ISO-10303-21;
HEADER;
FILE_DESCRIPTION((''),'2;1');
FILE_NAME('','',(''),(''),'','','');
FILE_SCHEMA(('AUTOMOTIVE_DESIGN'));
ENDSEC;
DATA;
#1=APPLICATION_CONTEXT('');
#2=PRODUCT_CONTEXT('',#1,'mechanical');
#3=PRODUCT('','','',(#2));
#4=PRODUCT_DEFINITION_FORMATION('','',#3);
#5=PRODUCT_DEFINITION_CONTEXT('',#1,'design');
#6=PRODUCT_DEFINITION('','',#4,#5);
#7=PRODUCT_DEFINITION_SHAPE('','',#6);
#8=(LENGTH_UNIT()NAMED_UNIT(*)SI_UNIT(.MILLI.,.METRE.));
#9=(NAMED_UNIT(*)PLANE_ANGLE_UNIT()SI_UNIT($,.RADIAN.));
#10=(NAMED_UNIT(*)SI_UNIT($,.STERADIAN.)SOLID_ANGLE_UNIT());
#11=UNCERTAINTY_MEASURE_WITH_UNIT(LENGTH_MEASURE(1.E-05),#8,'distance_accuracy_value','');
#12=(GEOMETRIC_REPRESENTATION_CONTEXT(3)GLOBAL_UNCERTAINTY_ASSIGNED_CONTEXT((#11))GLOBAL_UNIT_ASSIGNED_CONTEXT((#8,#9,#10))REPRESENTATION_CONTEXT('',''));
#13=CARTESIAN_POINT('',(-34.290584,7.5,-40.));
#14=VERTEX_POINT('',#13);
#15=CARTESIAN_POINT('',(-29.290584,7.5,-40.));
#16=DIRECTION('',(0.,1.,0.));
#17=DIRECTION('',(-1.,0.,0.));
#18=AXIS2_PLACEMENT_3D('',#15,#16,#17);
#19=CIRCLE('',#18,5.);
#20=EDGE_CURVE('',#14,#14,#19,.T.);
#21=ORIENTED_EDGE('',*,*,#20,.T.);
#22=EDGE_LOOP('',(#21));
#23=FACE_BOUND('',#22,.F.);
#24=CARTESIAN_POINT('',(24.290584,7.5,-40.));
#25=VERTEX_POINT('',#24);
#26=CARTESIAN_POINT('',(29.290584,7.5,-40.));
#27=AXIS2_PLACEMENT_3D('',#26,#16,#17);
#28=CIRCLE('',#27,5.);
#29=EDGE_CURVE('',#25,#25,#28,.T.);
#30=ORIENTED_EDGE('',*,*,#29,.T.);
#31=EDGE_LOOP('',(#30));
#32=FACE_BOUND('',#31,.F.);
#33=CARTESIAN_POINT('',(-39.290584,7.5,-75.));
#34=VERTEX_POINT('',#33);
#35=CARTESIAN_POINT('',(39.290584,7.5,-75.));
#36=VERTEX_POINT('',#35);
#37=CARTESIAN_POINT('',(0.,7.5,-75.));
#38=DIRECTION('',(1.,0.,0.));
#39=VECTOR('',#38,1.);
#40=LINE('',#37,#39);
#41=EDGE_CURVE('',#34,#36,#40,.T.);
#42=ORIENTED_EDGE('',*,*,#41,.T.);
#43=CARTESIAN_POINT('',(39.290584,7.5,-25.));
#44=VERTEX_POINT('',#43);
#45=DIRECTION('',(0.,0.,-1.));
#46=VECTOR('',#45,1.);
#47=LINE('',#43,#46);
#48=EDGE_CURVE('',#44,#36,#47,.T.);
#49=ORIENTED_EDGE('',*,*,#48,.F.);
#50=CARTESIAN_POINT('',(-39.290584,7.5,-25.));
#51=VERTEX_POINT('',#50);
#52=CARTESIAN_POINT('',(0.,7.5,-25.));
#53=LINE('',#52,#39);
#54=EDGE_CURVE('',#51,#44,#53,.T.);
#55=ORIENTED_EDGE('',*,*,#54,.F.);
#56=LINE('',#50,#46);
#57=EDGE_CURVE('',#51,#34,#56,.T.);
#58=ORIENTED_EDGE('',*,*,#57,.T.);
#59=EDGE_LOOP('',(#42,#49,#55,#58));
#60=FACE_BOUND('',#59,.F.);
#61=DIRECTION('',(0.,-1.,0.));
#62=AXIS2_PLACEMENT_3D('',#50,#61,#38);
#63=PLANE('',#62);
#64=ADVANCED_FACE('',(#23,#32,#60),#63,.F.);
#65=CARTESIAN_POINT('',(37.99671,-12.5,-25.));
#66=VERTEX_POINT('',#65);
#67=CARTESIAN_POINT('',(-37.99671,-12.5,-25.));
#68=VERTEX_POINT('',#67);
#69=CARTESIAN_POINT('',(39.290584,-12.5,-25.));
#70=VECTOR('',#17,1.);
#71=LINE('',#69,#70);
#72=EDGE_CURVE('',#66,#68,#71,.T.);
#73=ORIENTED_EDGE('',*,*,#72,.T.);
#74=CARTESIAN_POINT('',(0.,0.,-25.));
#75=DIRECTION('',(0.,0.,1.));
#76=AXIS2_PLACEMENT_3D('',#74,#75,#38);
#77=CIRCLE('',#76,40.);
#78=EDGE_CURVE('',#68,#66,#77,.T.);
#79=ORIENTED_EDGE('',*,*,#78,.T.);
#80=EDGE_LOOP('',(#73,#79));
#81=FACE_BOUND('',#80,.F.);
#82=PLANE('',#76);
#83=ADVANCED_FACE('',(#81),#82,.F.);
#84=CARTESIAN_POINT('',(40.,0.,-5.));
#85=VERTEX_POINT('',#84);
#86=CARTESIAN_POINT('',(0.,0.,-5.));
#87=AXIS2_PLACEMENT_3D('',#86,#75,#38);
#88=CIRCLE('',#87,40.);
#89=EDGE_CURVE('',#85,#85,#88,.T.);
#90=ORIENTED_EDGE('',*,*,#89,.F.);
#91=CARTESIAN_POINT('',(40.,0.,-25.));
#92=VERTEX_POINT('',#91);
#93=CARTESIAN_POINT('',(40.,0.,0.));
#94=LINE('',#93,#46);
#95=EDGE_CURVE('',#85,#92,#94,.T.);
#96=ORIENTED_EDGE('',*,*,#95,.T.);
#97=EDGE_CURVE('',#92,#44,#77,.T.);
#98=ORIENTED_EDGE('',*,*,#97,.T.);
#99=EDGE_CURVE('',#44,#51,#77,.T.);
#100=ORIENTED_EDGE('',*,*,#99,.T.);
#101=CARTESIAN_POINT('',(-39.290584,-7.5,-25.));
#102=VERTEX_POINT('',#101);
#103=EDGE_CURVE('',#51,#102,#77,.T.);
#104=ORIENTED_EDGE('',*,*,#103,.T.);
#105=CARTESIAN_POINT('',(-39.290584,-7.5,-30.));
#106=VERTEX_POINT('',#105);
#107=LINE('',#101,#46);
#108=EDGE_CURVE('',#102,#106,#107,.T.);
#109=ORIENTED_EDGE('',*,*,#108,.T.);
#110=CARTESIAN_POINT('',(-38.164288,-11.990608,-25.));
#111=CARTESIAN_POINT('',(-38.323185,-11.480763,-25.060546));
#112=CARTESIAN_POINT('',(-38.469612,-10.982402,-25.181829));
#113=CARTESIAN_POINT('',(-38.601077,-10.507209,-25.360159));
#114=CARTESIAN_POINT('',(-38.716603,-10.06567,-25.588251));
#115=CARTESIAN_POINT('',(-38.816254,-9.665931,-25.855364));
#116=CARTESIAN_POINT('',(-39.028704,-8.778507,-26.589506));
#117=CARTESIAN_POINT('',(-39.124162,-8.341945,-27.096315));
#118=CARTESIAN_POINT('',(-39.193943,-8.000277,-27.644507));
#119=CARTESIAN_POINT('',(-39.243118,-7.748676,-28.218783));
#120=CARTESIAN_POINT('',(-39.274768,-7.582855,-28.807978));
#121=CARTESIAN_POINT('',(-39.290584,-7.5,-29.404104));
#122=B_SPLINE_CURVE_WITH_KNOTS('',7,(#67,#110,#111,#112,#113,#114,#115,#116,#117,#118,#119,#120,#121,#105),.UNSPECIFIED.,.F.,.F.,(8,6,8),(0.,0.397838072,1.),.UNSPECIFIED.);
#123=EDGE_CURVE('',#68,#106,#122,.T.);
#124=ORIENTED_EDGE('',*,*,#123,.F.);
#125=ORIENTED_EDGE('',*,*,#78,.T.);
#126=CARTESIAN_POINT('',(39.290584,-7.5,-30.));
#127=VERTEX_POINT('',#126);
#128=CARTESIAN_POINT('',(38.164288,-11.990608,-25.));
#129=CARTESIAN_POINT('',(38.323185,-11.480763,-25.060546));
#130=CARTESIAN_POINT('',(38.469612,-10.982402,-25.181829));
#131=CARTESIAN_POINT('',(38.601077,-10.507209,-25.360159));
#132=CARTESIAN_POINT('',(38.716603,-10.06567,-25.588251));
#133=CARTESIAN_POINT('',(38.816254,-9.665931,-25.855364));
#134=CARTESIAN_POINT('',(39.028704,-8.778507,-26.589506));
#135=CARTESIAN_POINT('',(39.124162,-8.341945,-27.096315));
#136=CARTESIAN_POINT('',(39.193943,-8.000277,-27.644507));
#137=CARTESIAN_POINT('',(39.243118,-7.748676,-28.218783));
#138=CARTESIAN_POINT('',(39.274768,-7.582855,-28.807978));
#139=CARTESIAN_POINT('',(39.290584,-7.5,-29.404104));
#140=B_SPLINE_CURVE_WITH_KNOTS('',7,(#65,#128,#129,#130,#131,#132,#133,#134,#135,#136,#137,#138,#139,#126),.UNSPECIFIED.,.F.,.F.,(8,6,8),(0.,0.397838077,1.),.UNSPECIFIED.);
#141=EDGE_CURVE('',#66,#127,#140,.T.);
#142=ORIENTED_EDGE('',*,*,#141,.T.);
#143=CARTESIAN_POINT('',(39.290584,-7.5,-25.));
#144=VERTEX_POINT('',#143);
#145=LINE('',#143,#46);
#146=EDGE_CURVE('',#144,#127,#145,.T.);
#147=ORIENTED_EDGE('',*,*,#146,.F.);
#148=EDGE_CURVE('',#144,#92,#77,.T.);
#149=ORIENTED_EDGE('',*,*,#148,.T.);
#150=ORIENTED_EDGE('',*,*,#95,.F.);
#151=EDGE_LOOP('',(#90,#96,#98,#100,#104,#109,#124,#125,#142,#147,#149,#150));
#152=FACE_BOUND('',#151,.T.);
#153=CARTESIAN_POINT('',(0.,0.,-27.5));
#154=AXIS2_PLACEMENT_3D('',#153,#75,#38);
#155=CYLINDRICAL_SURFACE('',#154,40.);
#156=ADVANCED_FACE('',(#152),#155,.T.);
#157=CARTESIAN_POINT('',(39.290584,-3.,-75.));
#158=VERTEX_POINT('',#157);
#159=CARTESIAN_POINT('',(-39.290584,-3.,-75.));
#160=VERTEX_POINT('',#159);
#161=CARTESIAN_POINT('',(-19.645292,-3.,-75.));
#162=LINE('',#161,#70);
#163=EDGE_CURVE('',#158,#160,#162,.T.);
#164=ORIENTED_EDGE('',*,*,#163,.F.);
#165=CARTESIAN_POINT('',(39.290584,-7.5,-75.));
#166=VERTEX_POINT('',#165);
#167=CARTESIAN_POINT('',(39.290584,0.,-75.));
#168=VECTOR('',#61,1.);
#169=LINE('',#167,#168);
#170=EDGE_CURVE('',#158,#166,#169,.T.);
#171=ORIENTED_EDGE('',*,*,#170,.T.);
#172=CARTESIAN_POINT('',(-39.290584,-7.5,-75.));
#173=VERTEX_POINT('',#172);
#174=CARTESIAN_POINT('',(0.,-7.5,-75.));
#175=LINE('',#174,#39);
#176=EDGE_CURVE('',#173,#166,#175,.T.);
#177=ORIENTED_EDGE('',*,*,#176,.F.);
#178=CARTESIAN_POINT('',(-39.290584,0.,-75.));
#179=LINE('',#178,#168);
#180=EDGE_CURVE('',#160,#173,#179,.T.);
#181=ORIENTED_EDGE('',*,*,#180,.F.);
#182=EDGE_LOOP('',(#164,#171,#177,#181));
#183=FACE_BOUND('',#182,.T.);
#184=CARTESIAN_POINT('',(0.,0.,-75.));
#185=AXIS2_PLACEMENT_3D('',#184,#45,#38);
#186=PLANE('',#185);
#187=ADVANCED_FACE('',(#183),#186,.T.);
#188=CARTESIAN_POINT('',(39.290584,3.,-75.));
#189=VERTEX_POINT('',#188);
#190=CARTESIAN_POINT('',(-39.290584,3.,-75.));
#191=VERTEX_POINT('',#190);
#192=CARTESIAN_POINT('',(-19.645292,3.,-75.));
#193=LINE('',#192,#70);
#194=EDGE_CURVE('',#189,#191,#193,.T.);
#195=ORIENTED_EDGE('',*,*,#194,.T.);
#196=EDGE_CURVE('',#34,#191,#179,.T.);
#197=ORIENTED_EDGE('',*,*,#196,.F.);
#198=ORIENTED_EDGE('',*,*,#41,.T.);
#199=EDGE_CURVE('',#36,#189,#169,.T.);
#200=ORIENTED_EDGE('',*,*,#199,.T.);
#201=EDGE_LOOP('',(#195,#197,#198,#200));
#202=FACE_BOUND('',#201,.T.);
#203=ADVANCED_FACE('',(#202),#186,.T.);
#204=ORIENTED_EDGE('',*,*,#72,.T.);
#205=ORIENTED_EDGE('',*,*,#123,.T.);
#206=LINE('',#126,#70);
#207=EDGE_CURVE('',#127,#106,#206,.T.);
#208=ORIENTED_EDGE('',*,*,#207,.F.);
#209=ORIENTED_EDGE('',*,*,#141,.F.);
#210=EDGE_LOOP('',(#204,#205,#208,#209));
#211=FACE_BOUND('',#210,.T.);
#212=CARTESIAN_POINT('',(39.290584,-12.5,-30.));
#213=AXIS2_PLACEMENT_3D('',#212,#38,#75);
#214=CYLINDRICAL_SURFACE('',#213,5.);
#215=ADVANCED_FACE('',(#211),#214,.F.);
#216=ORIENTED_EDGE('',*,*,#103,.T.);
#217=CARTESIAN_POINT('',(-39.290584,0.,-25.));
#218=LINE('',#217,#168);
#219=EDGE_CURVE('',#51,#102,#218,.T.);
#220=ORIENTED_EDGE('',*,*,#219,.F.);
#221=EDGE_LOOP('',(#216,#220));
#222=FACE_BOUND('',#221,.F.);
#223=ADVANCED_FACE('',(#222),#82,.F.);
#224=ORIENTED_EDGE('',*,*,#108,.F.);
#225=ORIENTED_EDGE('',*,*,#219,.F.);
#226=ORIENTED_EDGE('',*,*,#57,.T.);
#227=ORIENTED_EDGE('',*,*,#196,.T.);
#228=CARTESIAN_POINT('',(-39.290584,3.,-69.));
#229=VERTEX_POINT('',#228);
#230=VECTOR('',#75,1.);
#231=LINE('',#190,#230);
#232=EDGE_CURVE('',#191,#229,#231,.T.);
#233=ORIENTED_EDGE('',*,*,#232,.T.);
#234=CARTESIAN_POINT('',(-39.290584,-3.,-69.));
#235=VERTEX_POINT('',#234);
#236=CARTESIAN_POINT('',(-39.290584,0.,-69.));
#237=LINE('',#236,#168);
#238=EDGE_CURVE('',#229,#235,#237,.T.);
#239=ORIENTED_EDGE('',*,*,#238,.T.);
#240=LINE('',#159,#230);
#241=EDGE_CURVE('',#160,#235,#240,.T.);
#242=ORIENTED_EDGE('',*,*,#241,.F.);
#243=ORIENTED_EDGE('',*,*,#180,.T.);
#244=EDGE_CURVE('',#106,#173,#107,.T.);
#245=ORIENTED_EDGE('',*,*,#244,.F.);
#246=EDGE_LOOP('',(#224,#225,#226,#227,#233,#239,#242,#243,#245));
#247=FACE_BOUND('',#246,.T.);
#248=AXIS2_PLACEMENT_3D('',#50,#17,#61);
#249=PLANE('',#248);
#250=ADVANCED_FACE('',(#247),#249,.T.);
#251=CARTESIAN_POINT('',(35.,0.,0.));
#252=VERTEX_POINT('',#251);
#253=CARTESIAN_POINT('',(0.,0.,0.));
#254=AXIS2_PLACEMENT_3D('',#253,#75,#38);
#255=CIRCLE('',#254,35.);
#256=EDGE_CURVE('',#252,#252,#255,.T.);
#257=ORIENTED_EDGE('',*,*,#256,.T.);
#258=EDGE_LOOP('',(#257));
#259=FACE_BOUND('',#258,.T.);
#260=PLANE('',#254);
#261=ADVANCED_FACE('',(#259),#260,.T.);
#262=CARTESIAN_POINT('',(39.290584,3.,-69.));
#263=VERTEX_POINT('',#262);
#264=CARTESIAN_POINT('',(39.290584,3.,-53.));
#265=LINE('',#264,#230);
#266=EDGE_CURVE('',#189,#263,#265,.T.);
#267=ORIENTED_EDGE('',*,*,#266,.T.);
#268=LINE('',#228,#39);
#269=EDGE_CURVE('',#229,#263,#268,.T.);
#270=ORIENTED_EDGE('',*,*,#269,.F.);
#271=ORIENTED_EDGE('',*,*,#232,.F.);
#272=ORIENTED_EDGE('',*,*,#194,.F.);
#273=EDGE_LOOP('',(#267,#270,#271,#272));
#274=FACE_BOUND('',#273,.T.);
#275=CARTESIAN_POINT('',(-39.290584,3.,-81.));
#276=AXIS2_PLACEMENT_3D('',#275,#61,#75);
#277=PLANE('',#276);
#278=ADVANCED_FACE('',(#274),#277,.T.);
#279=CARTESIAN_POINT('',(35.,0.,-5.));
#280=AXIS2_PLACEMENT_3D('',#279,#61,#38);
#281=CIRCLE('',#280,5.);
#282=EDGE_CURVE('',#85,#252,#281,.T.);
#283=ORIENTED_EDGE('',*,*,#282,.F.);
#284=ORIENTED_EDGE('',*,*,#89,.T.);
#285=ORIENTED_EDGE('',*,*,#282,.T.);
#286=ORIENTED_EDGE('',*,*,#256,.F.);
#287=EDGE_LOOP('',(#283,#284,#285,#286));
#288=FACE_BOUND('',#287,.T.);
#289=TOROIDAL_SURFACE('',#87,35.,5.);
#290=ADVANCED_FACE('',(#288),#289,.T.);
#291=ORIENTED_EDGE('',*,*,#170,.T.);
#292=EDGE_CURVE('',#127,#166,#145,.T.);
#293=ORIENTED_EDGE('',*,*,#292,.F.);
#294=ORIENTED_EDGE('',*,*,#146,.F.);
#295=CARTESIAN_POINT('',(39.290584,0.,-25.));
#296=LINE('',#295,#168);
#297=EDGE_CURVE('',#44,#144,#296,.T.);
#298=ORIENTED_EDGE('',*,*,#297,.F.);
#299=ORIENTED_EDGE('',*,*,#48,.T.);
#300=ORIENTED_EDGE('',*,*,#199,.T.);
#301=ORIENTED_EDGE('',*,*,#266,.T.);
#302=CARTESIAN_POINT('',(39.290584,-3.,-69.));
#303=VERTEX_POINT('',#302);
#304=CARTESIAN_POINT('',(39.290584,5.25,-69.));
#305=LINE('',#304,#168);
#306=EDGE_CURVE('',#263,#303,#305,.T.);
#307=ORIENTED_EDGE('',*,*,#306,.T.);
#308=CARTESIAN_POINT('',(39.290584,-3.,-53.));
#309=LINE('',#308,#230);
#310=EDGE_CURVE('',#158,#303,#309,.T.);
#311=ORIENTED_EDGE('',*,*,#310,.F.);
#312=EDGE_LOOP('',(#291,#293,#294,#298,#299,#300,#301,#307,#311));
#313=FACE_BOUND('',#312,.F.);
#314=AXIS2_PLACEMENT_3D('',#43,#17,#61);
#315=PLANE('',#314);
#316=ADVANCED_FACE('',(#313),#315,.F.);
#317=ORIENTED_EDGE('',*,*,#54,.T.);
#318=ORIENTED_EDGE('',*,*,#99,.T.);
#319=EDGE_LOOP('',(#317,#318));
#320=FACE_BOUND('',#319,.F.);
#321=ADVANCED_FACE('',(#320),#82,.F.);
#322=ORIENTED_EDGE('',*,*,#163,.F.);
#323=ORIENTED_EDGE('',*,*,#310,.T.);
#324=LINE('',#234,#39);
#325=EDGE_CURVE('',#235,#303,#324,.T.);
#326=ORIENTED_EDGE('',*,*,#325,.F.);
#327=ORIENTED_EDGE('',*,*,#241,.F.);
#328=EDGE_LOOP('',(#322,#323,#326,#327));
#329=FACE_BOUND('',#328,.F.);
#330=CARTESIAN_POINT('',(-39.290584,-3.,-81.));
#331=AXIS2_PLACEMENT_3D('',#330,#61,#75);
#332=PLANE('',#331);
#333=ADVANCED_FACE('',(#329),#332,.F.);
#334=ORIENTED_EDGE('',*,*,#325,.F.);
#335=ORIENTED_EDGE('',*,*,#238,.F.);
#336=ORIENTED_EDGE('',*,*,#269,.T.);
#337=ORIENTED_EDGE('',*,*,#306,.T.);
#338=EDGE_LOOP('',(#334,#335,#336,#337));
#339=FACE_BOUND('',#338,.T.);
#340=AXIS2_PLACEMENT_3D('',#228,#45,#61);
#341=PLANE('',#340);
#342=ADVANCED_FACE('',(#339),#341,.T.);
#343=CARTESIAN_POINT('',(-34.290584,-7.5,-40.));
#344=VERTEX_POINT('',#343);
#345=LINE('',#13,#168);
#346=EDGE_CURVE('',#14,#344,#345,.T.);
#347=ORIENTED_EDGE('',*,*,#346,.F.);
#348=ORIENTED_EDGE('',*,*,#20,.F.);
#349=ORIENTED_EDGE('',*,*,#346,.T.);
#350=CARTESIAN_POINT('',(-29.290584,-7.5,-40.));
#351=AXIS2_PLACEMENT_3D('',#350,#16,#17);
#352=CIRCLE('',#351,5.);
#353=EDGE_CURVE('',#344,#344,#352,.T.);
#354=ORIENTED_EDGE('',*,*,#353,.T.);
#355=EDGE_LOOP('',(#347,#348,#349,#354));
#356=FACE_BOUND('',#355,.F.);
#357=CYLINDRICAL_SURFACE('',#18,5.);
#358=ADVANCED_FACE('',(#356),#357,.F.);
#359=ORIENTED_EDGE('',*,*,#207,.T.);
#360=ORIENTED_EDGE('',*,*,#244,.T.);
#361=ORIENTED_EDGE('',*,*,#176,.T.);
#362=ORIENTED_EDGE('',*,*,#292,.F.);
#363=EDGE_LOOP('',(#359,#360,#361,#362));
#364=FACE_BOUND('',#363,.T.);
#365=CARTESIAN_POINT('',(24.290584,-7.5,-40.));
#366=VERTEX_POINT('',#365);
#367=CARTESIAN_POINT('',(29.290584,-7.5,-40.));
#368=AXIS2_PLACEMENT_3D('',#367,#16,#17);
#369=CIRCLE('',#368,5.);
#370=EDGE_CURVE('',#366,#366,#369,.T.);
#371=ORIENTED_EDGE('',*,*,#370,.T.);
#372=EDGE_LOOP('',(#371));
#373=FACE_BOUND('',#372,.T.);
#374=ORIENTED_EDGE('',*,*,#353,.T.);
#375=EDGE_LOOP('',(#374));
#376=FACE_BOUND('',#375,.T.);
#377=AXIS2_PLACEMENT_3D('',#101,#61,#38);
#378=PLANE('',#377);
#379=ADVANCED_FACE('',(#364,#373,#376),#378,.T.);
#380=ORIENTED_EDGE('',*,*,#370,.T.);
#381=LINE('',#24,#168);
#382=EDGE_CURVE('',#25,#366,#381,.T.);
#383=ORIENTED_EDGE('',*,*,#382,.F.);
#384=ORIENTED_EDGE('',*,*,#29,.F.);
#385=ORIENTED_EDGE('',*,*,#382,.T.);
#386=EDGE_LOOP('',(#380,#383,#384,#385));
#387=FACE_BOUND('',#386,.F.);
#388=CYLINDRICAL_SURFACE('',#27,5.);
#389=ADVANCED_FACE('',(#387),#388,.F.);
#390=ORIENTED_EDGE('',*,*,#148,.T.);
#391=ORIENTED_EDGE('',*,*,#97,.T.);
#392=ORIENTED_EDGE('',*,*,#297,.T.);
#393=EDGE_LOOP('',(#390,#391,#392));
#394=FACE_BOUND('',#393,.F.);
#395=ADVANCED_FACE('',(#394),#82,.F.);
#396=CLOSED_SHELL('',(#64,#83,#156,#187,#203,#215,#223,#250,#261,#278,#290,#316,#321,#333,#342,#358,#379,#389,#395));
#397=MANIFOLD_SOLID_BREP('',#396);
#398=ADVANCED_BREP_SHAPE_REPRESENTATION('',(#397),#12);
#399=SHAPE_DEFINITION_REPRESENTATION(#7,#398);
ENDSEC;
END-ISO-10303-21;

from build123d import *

# Parameters (mm, degrees)
F0_R        = 40
F1_DEPTH    = 25
F2_W        = 78.5811682275
F2_H        = 15
F3_DEPTH    = 50
F4_W        = 6
F4_H        = 12
F5_DEPTH    = 79.2915841138
F6_R        = 5
F7_DEPTH    = 25
F8_T4_DEPTH = 78.5811682275
F8_S5_R     = 40
F8_T6_DEPTH = 41


# Not quite as in the source:
# - a fillet or chamfer that OpenCascade refuses, or shapes differently, is made with other operations: its cross-section is extruded or revolved along the edge and cut away or added


with BuildPart() as f1:
    # F0 (on Top) → F1 (new body)
    with BuildSketch(Plane.XY):
        Circle(F0_R)
    extrude(amount=-F1_DEPTH)

    # F2 (on face) → F3 (join)
    with BuildSketch(Plane(origin=(0, 0, -25), x_dir=(1, 0, 0), z_dir=(0, 0, -1))):
        Rectangle(F2_W, F2_H)
    extrude(amount=F3_DEPTH)

    # F4 (on face) → F5 (cut, through all)
    with BuildSketch(Plane(origin=(-39.2905841138, 0, 0), x_dir=(0, -1, 0), z_dir=(-1, 0, 0))):
        with Locations((0, -75)):
            Rectangle(F4_W, F4_H)
    extrude(amount=-F5_DEPTH, mode=Mode.SUBTRACT)

    # F6 (on face) → F7 (cut)
    with BuildSketch(Plane(origin=(0, 7.5, 0), x_dir=(-1, 0, 0), z_dir=(0, 1, 0))):
        with Locations((-29.2905841138, -40)):
            Circle(F6_R)
        with Locations((29.2905841138, -40)):
            Circle(F6_R)
    extrude(amount=-F7_DEPTH, mode=Mode.SUBTRACT)

    # F8: fillet of radius 5 on 2 edges, made by hand


with BuildPart() as f8_tool2:
    # F8_s3 → F8_t4 (new body)
    with BuildSketch(Plane.YZ.offset(39.2905841138)):
        with BuildLine():
            ThreePointArc((-12.5, -25), (-8.9644660941, -26.4644660941), (-7.5, -30))
            Line((-7.5, -30), (-7.5, -25))
            Line((-7.5, -25), (-12.5, -25))
        make_face()
    extrude(amount=-F8_T4_DEPTH)

    # F8_s5 → F8_t6 (intersect, symmetric)
    with BuildSketch(Plane.XY.offset(-27.5)):
        Circle(F8_S5_R)
    extrude(amount=F8_T6_DEPTH, both=True, mode=Mode.INTERSECT)


with BuildPart() as f1_1:
    add(f1.part)

    # F8_t1: union F8_tool2
    add(f8_tool2.part)

    # F8_s7 → F8_t8 (revolve, cut)
    with BuildSketch(Plane.XZ):
        with BuildLine():
            ThreePointArc((40, -5), (38.5355339059, -1.4644660941), (35, 0))
            Line((35, 0), (40, 0))
            Line((40, 0), (40, -5))
        make_face()
    revolve(axis=Axis((0, 0, 0), (0, 0, 1)), mode=Mode.SUBTRACT)


solid = f1_1.part
